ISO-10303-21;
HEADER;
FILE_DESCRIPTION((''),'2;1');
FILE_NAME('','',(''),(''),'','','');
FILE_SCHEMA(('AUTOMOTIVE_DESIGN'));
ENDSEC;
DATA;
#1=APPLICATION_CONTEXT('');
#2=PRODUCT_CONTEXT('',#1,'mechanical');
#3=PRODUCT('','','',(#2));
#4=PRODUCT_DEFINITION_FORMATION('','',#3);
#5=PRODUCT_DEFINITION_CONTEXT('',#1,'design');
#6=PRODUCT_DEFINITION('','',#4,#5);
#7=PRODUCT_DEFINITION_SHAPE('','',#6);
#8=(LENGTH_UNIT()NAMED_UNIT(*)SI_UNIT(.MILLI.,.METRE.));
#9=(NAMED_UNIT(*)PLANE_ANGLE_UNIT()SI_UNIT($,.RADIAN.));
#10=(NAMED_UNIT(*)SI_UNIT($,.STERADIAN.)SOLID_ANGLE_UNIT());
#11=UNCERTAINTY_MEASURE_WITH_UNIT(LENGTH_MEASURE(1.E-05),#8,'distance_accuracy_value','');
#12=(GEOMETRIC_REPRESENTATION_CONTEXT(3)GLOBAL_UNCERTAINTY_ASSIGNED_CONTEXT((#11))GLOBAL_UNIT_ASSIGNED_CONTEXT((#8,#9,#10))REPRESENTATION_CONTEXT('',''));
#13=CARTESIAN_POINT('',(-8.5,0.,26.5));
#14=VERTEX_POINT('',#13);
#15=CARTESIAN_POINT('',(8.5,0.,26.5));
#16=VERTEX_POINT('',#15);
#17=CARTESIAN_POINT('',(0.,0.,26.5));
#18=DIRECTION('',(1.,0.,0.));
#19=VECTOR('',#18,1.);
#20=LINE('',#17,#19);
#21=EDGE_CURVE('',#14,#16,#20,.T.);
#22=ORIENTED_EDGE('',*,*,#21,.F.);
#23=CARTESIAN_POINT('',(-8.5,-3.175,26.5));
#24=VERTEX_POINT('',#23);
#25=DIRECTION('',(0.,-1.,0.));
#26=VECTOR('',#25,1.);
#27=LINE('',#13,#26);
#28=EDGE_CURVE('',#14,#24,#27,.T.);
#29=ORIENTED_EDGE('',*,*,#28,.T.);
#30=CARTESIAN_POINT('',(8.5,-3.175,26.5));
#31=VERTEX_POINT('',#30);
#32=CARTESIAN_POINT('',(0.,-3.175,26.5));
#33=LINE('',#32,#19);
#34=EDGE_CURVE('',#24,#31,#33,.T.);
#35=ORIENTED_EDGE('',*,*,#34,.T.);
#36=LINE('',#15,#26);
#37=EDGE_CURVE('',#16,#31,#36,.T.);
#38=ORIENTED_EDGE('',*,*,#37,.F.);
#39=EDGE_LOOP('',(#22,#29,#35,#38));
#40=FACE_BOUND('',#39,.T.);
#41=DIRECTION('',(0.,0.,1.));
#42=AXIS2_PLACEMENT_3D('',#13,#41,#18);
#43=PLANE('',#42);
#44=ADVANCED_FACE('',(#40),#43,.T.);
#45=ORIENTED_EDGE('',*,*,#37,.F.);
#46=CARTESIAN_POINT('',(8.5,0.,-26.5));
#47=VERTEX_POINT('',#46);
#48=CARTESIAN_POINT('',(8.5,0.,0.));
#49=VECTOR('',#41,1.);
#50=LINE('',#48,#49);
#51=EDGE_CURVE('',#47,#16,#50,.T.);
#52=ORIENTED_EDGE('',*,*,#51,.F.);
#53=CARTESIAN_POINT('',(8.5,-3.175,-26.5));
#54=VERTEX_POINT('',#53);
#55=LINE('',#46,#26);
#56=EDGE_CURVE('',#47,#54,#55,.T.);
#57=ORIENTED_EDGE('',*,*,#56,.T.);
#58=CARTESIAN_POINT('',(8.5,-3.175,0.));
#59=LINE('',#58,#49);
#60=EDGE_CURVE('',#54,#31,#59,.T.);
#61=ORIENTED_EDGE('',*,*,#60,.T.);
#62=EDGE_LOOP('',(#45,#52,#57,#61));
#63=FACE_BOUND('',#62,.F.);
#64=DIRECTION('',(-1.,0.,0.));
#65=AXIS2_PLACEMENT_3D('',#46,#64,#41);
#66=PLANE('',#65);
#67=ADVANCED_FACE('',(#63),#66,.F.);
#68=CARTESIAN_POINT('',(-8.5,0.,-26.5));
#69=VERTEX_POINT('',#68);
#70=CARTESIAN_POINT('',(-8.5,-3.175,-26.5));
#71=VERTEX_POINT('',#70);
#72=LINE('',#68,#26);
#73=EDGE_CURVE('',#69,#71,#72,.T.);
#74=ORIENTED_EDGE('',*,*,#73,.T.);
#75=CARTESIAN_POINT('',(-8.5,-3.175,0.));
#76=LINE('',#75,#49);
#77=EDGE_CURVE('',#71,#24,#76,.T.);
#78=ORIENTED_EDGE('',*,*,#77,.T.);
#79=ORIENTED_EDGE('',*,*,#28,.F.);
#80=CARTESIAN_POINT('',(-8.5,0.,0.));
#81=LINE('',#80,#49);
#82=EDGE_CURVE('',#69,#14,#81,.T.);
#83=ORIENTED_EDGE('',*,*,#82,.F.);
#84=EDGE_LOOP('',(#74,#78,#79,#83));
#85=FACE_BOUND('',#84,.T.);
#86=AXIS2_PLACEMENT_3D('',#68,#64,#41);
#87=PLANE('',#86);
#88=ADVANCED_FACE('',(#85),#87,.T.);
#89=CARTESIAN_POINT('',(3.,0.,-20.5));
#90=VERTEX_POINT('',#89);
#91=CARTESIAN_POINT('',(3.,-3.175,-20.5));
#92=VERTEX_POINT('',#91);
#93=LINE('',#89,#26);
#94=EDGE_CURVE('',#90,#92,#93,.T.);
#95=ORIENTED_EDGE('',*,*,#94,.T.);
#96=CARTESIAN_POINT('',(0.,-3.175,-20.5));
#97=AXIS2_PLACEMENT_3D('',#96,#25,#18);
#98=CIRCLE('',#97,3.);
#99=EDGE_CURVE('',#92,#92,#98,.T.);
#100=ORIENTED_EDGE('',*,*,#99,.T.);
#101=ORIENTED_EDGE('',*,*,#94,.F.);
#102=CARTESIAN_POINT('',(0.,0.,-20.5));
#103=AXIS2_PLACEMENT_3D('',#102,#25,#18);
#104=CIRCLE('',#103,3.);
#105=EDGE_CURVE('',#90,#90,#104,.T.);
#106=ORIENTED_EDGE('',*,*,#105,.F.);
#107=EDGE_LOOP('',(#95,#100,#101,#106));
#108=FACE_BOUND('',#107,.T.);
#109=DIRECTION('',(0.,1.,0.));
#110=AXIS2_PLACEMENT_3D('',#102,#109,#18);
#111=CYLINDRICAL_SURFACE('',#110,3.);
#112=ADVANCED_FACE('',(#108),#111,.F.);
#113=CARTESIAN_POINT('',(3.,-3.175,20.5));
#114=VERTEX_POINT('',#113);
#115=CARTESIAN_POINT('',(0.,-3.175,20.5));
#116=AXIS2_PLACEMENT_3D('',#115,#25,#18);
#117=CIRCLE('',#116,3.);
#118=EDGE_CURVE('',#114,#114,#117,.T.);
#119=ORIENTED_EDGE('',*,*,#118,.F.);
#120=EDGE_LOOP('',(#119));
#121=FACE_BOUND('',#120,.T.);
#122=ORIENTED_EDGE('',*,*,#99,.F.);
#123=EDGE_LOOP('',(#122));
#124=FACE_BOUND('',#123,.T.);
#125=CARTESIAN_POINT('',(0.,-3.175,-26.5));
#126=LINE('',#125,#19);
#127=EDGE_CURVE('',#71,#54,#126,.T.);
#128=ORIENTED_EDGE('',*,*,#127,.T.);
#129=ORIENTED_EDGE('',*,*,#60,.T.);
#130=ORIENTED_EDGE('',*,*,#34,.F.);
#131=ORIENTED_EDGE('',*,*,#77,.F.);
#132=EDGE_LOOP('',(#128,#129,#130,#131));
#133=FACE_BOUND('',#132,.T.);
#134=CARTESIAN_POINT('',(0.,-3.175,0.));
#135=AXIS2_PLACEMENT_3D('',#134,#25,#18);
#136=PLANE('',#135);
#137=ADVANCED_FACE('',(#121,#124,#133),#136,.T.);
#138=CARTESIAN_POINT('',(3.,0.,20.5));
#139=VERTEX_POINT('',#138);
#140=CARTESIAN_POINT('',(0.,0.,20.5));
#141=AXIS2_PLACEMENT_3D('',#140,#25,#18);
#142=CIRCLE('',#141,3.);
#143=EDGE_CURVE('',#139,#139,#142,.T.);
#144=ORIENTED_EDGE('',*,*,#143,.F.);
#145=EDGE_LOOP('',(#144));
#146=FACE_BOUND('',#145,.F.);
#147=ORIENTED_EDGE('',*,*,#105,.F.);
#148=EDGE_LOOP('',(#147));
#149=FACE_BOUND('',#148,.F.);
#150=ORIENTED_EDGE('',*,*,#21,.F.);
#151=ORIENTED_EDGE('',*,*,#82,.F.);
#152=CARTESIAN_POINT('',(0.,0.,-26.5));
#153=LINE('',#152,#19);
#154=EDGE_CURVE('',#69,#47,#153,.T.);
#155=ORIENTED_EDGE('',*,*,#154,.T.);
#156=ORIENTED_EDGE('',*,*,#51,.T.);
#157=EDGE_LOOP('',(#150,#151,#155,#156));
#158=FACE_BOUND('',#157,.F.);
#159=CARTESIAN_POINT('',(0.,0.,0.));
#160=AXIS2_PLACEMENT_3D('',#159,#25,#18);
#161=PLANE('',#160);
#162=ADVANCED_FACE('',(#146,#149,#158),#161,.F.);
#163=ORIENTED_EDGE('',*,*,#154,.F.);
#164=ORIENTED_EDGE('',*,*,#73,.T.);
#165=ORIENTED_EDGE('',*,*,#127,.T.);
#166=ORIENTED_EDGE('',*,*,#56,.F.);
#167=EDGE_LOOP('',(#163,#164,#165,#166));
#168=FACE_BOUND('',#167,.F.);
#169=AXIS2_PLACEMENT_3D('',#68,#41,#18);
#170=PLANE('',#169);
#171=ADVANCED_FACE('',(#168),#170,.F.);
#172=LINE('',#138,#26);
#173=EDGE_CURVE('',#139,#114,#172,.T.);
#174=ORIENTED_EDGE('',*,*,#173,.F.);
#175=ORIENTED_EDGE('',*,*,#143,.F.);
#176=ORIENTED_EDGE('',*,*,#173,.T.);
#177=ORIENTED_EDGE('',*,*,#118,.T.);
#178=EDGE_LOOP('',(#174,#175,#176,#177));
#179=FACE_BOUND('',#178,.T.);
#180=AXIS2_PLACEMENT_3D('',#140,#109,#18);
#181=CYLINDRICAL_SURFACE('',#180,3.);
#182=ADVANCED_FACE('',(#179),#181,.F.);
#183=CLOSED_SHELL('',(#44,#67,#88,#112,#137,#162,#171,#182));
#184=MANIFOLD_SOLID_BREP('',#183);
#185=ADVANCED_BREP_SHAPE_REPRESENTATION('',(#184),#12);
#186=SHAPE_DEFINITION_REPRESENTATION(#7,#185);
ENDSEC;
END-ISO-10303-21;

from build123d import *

# Parameters (mm, degrees)
F0_W     = 17
F0_H     = 53
F0_R     = 3
F1_DEPTH = 3.175


# Not quite as in the source:
# - a length typed as a fraction of an inch, garbled in the dataset ("3 / 203.2 mm" for 3/8 in), is restored


with BuildPart() as f1:
    # F0 (on Front) → F1 (new body)
    with BuildSketch(Plane.XZ):
        Rectangle(F0_W, F0_H)
        with Locations((0, -20.5)):
            Circle(F0_R, mode=Mode.SUBTRACT)
        with Locations((0, 20.5)):
            Circle(F0_R, mode=Mode.SUBTRACT)
    extrude(amount=F1_DEPTH)


solid = f1.part
